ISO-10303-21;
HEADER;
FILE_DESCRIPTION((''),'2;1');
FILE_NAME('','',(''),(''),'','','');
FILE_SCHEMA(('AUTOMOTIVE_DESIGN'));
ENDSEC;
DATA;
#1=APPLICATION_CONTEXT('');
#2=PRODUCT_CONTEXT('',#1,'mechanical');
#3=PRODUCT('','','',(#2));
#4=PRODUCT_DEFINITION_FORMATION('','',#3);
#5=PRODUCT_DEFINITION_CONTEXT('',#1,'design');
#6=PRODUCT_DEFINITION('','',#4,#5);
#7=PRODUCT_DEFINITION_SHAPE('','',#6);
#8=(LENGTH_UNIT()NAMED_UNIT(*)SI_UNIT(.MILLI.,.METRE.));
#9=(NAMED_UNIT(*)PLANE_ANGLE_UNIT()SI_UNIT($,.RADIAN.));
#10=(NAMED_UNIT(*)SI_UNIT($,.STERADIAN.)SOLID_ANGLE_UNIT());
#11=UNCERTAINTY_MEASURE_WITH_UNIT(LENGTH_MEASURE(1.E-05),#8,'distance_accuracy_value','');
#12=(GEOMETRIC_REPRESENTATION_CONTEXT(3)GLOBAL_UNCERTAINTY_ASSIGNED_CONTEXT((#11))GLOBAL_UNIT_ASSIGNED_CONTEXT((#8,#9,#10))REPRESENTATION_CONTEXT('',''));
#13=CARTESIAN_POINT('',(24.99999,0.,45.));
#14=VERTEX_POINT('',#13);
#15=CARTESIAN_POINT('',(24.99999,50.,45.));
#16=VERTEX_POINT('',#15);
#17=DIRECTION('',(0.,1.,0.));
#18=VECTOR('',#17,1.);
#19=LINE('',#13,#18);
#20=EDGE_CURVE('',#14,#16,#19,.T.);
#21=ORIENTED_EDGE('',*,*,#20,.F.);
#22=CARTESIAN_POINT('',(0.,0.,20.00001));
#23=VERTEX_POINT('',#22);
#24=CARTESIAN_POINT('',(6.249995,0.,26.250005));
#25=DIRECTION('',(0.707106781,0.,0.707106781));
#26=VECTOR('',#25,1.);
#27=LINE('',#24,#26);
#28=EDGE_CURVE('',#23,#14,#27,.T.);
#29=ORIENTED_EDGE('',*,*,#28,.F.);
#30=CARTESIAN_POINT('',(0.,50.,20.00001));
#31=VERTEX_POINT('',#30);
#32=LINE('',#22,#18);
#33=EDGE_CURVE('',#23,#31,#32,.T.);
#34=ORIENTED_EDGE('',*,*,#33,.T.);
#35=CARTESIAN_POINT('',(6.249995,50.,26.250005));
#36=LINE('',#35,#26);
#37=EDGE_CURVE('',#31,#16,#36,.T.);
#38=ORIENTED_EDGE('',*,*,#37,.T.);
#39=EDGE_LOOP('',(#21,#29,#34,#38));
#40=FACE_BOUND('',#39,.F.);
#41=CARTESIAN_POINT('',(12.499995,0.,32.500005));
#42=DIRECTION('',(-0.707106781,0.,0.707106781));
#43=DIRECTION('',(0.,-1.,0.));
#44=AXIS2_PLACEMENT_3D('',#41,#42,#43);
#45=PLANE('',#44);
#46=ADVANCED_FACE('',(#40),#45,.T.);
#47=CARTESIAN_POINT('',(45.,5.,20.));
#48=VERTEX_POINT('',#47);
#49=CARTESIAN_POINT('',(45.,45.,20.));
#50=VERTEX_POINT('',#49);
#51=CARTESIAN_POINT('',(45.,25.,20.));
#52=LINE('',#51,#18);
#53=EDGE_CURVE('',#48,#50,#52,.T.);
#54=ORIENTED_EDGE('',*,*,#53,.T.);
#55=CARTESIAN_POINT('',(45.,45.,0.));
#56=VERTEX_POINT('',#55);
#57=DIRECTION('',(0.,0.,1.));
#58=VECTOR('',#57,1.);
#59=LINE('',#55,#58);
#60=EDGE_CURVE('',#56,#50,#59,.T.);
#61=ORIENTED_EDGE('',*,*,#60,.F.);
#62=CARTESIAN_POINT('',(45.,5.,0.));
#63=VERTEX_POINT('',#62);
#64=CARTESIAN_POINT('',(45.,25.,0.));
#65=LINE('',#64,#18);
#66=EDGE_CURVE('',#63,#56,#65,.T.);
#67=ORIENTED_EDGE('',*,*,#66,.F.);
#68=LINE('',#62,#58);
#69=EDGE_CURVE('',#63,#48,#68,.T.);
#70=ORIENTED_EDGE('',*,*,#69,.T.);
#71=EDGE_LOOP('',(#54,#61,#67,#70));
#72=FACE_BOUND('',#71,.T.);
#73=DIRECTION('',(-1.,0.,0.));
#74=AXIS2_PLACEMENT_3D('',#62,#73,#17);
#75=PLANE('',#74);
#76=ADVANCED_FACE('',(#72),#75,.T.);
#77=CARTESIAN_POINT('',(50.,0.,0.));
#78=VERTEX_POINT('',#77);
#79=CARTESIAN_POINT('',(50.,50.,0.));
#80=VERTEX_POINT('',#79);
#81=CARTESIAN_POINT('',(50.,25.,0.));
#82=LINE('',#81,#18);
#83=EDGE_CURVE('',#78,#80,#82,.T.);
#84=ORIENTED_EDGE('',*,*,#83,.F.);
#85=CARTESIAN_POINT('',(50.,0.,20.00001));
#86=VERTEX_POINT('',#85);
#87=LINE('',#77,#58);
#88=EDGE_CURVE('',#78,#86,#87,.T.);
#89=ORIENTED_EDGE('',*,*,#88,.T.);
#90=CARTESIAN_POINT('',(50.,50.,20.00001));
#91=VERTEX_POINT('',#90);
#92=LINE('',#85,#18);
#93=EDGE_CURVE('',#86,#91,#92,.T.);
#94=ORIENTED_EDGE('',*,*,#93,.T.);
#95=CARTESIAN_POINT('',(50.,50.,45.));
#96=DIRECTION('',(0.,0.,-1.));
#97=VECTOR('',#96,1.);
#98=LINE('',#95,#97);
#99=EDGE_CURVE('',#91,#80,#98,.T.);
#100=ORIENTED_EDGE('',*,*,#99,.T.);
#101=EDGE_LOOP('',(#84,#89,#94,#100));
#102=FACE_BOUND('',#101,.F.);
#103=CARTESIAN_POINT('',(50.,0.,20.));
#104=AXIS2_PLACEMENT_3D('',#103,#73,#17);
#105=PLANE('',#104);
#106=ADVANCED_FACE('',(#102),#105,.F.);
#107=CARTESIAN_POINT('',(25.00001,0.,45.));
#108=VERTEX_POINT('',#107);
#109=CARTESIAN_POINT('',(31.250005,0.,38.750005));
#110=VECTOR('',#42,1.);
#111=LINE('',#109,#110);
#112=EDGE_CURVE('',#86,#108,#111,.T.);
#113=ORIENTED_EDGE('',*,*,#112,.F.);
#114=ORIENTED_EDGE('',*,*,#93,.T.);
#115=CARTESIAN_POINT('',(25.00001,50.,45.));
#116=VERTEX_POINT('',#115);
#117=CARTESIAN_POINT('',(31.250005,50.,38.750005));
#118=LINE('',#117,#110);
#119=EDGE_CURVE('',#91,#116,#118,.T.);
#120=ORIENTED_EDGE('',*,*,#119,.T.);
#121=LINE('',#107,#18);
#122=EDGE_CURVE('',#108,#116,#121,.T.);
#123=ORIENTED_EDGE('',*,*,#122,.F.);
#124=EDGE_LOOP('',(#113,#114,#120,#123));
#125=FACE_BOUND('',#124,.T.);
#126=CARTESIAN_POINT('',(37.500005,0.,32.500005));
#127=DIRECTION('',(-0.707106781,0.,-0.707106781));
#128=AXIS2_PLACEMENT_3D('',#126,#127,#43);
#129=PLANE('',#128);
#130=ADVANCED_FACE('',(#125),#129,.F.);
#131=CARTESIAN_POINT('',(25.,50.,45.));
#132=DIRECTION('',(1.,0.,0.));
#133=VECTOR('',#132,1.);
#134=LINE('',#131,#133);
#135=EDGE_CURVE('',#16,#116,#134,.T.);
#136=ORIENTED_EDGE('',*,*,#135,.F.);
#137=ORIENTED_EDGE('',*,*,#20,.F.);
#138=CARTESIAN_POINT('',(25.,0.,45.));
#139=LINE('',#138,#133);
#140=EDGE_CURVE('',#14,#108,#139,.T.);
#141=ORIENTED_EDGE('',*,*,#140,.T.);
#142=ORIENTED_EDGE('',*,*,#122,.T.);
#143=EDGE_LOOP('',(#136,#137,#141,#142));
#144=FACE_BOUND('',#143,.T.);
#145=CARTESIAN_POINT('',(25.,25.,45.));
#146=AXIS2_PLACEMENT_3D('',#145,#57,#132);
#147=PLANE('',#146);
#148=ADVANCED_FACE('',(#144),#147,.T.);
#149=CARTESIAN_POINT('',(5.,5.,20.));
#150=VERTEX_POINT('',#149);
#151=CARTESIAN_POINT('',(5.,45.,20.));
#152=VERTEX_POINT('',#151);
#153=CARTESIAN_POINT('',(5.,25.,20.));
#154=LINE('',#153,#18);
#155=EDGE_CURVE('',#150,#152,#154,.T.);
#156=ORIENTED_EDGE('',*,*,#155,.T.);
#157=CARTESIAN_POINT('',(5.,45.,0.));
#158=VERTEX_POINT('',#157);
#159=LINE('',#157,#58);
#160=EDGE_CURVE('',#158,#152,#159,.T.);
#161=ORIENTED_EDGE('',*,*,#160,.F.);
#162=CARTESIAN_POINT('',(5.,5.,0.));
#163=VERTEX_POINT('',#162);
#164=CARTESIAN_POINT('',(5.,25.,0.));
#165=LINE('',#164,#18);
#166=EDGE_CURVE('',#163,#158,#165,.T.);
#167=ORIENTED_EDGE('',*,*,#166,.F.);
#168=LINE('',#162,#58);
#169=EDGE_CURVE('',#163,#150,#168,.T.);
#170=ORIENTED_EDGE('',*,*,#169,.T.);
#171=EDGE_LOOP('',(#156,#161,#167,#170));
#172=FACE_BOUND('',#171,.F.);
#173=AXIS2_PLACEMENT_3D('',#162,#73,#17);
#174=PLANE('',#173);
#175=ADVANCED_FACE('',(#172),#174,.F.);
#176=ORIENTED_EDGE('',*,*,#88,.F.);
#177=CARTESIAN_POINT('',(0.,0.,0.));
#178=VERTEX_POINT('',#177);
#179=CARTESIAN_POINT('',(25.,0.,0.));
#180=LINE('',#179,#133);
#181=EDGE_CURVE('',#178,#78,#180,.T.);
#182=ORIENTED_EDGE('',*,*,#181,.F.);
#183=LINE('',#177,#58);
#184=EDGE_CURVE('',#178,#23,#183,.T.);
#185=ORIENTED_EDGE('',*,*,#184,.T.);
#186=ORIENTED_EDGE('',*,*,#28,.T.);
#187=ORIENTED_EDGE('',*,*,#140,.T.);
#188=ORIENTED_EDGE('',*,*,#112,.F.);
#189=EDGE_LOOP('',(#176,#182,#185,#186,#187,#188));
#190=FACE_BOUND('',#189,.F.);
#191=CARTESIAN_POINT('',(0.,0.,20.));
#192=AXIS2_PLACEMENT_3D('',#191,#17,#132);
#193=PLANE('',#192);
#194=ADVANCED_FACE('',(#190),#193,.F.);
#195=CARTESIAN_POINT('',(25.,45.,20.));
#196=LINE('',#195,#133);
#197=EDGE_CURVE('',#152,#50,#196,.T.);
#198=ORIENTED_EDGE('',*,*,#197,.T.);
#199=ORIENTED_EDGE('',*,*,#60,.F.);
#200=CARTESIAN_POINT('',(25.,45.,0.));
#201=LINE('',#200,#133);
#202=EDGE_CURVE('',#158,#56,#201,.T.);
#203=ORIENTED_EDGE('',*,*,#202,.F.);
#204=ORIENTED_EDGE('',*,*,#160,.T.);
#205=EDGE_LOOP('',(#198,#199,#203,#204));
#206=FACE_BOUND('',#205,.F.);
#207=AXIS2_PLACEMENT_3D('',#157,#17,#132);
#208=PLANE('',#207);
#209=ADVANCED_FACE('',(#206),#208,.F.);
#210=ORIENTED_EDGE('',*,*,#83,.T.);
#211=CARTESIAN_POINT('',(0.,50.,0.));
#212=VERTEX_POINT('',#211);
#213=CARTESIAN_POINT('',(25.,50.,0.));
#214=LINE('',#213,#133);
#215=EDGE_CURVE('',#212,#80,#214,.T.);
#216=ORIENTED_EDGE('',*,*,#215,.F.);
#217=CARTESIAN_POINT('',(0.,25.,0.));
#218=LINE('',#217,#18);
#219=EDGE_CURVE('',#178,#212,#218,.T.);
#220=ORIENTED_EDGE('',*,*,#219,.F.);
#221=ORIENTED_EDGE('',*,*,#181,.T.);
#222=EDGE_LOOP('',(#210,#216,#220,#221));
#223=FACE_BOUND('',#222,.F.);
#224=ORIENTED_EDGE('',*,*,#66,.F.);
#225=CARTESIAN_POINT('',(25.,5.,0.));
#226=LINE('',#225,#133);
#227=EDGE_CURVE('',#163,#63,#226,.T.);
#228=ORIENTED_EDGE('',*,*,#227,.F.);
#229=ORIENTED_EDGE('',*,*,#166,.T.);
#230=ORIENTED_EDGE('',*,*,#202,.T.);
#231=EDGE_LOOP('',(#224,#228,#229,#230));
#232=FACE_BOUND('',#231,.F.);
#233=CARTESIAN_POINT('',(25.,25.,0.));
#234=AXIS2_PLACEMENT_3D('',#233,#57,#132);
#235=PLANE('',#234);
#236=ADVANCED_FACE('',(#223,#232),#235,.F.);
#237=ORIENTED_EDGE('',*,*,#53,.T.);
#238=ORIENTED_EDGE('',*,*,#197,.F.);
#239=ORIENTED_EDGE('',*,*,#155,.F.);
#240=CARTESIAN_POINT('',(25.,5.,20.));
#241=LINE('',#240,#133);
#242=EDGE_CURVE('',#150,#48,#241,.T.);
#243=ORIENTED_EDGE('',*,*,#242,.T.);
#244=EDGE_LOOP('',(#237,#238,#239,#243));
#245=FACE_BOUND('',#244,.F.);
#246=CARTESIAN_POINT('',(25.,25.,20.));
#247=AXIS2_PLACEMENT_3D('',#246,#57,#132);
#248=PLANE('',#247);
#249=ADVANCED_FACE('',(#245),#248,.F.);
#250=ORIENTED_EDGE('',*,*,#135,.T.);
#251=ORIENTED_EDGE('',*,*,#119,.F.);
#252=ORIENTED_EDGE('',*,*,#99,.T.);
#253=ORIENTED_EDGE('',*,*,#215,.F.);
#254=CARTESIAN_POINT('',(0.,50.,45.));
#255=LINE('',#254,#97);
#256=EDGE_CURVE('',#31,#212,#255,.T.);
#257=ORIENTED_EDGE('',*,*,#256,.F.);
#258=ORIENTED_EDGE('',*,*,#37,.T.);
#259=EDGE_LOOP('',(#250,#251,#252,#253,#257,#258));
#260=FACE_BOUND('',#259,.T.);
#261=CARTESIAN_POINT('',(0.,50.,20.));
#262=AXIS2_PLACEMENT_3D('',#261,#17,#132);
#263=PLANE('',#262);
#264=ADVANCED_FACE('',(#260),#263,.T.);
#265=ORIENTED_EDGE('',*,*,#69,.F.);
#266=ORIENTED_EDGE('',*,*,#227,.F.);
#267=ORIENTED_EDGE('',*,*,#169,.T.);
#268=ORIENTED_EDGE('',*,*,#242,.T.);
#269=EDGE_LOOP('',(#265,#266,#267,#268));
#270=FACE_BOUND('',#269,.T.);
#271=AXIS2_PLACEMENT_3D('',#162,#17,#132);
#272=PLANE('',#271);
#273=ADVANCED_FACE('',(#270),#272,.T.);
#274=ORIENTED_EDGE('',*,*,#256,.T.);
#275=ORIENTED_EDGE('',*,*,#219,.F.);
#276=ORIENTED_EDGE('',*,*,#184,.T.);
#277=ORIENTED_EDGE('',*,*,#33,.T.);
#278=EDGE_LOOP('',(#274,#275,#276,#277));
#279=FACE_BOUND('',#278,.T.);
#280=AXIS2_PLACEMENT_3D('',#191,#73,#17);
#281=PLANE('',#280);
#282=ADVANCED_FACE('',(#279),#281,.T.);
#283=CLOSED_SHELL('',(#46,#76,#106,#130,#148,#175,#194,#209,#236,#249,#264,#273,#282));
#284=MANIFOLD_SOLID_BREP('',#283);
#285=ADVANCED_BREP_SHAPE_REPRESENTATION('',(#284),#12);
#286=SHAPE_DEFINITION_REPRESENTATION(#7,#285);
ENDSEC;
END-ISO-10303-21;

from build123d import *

# Parameters (mm, degrees)
F0_W     = 50
F0_H     = 50
F0_W_2   = 40
F0_H_2   = 40
F1_DEPTH = 20
F2_W     = 50
F2_H     = 50
F3_DEPTH = 25
F4_SIZE  = 24.99999


# Not quite as in the source:
# - a fillet or chamfer is up to 0.001 mm smaller than in the source, because OpenCascade refuses the exact size


with BuildPart() as f1:
    # F0 (on Top) → F1 (new body)
    with BuildSketch(Plane.XY):
        with Locations((25, 25)):
            Rectangle(F0_W, F0_H)
        with Locations((25, 25)):
            Rectangle(F0_W_2, F0_H_2, mode=Mode.SUBTRACT)
    extrude(amount=F1_DEPTH)

    # F2 (on face) → F3 (join)
    with BuildSketch(Plane.XY.offset(20)):
        with Locations((25, 25)):
            Rectangle(F2_W, F2_H)
    extrude(amount=F3_DEPTH)

    # F4 (size 25 in the source; OpenCascade refuses exactly that, so slightly less here)
    f4_edges = [f1.edges().sort_by_distance(p)[0] for p in [
        (0, 25, 45),
        (50, 25, 45),
    ]]
    chamfer(f4_edges, length=F4_SIZE)


solid = f1.part
